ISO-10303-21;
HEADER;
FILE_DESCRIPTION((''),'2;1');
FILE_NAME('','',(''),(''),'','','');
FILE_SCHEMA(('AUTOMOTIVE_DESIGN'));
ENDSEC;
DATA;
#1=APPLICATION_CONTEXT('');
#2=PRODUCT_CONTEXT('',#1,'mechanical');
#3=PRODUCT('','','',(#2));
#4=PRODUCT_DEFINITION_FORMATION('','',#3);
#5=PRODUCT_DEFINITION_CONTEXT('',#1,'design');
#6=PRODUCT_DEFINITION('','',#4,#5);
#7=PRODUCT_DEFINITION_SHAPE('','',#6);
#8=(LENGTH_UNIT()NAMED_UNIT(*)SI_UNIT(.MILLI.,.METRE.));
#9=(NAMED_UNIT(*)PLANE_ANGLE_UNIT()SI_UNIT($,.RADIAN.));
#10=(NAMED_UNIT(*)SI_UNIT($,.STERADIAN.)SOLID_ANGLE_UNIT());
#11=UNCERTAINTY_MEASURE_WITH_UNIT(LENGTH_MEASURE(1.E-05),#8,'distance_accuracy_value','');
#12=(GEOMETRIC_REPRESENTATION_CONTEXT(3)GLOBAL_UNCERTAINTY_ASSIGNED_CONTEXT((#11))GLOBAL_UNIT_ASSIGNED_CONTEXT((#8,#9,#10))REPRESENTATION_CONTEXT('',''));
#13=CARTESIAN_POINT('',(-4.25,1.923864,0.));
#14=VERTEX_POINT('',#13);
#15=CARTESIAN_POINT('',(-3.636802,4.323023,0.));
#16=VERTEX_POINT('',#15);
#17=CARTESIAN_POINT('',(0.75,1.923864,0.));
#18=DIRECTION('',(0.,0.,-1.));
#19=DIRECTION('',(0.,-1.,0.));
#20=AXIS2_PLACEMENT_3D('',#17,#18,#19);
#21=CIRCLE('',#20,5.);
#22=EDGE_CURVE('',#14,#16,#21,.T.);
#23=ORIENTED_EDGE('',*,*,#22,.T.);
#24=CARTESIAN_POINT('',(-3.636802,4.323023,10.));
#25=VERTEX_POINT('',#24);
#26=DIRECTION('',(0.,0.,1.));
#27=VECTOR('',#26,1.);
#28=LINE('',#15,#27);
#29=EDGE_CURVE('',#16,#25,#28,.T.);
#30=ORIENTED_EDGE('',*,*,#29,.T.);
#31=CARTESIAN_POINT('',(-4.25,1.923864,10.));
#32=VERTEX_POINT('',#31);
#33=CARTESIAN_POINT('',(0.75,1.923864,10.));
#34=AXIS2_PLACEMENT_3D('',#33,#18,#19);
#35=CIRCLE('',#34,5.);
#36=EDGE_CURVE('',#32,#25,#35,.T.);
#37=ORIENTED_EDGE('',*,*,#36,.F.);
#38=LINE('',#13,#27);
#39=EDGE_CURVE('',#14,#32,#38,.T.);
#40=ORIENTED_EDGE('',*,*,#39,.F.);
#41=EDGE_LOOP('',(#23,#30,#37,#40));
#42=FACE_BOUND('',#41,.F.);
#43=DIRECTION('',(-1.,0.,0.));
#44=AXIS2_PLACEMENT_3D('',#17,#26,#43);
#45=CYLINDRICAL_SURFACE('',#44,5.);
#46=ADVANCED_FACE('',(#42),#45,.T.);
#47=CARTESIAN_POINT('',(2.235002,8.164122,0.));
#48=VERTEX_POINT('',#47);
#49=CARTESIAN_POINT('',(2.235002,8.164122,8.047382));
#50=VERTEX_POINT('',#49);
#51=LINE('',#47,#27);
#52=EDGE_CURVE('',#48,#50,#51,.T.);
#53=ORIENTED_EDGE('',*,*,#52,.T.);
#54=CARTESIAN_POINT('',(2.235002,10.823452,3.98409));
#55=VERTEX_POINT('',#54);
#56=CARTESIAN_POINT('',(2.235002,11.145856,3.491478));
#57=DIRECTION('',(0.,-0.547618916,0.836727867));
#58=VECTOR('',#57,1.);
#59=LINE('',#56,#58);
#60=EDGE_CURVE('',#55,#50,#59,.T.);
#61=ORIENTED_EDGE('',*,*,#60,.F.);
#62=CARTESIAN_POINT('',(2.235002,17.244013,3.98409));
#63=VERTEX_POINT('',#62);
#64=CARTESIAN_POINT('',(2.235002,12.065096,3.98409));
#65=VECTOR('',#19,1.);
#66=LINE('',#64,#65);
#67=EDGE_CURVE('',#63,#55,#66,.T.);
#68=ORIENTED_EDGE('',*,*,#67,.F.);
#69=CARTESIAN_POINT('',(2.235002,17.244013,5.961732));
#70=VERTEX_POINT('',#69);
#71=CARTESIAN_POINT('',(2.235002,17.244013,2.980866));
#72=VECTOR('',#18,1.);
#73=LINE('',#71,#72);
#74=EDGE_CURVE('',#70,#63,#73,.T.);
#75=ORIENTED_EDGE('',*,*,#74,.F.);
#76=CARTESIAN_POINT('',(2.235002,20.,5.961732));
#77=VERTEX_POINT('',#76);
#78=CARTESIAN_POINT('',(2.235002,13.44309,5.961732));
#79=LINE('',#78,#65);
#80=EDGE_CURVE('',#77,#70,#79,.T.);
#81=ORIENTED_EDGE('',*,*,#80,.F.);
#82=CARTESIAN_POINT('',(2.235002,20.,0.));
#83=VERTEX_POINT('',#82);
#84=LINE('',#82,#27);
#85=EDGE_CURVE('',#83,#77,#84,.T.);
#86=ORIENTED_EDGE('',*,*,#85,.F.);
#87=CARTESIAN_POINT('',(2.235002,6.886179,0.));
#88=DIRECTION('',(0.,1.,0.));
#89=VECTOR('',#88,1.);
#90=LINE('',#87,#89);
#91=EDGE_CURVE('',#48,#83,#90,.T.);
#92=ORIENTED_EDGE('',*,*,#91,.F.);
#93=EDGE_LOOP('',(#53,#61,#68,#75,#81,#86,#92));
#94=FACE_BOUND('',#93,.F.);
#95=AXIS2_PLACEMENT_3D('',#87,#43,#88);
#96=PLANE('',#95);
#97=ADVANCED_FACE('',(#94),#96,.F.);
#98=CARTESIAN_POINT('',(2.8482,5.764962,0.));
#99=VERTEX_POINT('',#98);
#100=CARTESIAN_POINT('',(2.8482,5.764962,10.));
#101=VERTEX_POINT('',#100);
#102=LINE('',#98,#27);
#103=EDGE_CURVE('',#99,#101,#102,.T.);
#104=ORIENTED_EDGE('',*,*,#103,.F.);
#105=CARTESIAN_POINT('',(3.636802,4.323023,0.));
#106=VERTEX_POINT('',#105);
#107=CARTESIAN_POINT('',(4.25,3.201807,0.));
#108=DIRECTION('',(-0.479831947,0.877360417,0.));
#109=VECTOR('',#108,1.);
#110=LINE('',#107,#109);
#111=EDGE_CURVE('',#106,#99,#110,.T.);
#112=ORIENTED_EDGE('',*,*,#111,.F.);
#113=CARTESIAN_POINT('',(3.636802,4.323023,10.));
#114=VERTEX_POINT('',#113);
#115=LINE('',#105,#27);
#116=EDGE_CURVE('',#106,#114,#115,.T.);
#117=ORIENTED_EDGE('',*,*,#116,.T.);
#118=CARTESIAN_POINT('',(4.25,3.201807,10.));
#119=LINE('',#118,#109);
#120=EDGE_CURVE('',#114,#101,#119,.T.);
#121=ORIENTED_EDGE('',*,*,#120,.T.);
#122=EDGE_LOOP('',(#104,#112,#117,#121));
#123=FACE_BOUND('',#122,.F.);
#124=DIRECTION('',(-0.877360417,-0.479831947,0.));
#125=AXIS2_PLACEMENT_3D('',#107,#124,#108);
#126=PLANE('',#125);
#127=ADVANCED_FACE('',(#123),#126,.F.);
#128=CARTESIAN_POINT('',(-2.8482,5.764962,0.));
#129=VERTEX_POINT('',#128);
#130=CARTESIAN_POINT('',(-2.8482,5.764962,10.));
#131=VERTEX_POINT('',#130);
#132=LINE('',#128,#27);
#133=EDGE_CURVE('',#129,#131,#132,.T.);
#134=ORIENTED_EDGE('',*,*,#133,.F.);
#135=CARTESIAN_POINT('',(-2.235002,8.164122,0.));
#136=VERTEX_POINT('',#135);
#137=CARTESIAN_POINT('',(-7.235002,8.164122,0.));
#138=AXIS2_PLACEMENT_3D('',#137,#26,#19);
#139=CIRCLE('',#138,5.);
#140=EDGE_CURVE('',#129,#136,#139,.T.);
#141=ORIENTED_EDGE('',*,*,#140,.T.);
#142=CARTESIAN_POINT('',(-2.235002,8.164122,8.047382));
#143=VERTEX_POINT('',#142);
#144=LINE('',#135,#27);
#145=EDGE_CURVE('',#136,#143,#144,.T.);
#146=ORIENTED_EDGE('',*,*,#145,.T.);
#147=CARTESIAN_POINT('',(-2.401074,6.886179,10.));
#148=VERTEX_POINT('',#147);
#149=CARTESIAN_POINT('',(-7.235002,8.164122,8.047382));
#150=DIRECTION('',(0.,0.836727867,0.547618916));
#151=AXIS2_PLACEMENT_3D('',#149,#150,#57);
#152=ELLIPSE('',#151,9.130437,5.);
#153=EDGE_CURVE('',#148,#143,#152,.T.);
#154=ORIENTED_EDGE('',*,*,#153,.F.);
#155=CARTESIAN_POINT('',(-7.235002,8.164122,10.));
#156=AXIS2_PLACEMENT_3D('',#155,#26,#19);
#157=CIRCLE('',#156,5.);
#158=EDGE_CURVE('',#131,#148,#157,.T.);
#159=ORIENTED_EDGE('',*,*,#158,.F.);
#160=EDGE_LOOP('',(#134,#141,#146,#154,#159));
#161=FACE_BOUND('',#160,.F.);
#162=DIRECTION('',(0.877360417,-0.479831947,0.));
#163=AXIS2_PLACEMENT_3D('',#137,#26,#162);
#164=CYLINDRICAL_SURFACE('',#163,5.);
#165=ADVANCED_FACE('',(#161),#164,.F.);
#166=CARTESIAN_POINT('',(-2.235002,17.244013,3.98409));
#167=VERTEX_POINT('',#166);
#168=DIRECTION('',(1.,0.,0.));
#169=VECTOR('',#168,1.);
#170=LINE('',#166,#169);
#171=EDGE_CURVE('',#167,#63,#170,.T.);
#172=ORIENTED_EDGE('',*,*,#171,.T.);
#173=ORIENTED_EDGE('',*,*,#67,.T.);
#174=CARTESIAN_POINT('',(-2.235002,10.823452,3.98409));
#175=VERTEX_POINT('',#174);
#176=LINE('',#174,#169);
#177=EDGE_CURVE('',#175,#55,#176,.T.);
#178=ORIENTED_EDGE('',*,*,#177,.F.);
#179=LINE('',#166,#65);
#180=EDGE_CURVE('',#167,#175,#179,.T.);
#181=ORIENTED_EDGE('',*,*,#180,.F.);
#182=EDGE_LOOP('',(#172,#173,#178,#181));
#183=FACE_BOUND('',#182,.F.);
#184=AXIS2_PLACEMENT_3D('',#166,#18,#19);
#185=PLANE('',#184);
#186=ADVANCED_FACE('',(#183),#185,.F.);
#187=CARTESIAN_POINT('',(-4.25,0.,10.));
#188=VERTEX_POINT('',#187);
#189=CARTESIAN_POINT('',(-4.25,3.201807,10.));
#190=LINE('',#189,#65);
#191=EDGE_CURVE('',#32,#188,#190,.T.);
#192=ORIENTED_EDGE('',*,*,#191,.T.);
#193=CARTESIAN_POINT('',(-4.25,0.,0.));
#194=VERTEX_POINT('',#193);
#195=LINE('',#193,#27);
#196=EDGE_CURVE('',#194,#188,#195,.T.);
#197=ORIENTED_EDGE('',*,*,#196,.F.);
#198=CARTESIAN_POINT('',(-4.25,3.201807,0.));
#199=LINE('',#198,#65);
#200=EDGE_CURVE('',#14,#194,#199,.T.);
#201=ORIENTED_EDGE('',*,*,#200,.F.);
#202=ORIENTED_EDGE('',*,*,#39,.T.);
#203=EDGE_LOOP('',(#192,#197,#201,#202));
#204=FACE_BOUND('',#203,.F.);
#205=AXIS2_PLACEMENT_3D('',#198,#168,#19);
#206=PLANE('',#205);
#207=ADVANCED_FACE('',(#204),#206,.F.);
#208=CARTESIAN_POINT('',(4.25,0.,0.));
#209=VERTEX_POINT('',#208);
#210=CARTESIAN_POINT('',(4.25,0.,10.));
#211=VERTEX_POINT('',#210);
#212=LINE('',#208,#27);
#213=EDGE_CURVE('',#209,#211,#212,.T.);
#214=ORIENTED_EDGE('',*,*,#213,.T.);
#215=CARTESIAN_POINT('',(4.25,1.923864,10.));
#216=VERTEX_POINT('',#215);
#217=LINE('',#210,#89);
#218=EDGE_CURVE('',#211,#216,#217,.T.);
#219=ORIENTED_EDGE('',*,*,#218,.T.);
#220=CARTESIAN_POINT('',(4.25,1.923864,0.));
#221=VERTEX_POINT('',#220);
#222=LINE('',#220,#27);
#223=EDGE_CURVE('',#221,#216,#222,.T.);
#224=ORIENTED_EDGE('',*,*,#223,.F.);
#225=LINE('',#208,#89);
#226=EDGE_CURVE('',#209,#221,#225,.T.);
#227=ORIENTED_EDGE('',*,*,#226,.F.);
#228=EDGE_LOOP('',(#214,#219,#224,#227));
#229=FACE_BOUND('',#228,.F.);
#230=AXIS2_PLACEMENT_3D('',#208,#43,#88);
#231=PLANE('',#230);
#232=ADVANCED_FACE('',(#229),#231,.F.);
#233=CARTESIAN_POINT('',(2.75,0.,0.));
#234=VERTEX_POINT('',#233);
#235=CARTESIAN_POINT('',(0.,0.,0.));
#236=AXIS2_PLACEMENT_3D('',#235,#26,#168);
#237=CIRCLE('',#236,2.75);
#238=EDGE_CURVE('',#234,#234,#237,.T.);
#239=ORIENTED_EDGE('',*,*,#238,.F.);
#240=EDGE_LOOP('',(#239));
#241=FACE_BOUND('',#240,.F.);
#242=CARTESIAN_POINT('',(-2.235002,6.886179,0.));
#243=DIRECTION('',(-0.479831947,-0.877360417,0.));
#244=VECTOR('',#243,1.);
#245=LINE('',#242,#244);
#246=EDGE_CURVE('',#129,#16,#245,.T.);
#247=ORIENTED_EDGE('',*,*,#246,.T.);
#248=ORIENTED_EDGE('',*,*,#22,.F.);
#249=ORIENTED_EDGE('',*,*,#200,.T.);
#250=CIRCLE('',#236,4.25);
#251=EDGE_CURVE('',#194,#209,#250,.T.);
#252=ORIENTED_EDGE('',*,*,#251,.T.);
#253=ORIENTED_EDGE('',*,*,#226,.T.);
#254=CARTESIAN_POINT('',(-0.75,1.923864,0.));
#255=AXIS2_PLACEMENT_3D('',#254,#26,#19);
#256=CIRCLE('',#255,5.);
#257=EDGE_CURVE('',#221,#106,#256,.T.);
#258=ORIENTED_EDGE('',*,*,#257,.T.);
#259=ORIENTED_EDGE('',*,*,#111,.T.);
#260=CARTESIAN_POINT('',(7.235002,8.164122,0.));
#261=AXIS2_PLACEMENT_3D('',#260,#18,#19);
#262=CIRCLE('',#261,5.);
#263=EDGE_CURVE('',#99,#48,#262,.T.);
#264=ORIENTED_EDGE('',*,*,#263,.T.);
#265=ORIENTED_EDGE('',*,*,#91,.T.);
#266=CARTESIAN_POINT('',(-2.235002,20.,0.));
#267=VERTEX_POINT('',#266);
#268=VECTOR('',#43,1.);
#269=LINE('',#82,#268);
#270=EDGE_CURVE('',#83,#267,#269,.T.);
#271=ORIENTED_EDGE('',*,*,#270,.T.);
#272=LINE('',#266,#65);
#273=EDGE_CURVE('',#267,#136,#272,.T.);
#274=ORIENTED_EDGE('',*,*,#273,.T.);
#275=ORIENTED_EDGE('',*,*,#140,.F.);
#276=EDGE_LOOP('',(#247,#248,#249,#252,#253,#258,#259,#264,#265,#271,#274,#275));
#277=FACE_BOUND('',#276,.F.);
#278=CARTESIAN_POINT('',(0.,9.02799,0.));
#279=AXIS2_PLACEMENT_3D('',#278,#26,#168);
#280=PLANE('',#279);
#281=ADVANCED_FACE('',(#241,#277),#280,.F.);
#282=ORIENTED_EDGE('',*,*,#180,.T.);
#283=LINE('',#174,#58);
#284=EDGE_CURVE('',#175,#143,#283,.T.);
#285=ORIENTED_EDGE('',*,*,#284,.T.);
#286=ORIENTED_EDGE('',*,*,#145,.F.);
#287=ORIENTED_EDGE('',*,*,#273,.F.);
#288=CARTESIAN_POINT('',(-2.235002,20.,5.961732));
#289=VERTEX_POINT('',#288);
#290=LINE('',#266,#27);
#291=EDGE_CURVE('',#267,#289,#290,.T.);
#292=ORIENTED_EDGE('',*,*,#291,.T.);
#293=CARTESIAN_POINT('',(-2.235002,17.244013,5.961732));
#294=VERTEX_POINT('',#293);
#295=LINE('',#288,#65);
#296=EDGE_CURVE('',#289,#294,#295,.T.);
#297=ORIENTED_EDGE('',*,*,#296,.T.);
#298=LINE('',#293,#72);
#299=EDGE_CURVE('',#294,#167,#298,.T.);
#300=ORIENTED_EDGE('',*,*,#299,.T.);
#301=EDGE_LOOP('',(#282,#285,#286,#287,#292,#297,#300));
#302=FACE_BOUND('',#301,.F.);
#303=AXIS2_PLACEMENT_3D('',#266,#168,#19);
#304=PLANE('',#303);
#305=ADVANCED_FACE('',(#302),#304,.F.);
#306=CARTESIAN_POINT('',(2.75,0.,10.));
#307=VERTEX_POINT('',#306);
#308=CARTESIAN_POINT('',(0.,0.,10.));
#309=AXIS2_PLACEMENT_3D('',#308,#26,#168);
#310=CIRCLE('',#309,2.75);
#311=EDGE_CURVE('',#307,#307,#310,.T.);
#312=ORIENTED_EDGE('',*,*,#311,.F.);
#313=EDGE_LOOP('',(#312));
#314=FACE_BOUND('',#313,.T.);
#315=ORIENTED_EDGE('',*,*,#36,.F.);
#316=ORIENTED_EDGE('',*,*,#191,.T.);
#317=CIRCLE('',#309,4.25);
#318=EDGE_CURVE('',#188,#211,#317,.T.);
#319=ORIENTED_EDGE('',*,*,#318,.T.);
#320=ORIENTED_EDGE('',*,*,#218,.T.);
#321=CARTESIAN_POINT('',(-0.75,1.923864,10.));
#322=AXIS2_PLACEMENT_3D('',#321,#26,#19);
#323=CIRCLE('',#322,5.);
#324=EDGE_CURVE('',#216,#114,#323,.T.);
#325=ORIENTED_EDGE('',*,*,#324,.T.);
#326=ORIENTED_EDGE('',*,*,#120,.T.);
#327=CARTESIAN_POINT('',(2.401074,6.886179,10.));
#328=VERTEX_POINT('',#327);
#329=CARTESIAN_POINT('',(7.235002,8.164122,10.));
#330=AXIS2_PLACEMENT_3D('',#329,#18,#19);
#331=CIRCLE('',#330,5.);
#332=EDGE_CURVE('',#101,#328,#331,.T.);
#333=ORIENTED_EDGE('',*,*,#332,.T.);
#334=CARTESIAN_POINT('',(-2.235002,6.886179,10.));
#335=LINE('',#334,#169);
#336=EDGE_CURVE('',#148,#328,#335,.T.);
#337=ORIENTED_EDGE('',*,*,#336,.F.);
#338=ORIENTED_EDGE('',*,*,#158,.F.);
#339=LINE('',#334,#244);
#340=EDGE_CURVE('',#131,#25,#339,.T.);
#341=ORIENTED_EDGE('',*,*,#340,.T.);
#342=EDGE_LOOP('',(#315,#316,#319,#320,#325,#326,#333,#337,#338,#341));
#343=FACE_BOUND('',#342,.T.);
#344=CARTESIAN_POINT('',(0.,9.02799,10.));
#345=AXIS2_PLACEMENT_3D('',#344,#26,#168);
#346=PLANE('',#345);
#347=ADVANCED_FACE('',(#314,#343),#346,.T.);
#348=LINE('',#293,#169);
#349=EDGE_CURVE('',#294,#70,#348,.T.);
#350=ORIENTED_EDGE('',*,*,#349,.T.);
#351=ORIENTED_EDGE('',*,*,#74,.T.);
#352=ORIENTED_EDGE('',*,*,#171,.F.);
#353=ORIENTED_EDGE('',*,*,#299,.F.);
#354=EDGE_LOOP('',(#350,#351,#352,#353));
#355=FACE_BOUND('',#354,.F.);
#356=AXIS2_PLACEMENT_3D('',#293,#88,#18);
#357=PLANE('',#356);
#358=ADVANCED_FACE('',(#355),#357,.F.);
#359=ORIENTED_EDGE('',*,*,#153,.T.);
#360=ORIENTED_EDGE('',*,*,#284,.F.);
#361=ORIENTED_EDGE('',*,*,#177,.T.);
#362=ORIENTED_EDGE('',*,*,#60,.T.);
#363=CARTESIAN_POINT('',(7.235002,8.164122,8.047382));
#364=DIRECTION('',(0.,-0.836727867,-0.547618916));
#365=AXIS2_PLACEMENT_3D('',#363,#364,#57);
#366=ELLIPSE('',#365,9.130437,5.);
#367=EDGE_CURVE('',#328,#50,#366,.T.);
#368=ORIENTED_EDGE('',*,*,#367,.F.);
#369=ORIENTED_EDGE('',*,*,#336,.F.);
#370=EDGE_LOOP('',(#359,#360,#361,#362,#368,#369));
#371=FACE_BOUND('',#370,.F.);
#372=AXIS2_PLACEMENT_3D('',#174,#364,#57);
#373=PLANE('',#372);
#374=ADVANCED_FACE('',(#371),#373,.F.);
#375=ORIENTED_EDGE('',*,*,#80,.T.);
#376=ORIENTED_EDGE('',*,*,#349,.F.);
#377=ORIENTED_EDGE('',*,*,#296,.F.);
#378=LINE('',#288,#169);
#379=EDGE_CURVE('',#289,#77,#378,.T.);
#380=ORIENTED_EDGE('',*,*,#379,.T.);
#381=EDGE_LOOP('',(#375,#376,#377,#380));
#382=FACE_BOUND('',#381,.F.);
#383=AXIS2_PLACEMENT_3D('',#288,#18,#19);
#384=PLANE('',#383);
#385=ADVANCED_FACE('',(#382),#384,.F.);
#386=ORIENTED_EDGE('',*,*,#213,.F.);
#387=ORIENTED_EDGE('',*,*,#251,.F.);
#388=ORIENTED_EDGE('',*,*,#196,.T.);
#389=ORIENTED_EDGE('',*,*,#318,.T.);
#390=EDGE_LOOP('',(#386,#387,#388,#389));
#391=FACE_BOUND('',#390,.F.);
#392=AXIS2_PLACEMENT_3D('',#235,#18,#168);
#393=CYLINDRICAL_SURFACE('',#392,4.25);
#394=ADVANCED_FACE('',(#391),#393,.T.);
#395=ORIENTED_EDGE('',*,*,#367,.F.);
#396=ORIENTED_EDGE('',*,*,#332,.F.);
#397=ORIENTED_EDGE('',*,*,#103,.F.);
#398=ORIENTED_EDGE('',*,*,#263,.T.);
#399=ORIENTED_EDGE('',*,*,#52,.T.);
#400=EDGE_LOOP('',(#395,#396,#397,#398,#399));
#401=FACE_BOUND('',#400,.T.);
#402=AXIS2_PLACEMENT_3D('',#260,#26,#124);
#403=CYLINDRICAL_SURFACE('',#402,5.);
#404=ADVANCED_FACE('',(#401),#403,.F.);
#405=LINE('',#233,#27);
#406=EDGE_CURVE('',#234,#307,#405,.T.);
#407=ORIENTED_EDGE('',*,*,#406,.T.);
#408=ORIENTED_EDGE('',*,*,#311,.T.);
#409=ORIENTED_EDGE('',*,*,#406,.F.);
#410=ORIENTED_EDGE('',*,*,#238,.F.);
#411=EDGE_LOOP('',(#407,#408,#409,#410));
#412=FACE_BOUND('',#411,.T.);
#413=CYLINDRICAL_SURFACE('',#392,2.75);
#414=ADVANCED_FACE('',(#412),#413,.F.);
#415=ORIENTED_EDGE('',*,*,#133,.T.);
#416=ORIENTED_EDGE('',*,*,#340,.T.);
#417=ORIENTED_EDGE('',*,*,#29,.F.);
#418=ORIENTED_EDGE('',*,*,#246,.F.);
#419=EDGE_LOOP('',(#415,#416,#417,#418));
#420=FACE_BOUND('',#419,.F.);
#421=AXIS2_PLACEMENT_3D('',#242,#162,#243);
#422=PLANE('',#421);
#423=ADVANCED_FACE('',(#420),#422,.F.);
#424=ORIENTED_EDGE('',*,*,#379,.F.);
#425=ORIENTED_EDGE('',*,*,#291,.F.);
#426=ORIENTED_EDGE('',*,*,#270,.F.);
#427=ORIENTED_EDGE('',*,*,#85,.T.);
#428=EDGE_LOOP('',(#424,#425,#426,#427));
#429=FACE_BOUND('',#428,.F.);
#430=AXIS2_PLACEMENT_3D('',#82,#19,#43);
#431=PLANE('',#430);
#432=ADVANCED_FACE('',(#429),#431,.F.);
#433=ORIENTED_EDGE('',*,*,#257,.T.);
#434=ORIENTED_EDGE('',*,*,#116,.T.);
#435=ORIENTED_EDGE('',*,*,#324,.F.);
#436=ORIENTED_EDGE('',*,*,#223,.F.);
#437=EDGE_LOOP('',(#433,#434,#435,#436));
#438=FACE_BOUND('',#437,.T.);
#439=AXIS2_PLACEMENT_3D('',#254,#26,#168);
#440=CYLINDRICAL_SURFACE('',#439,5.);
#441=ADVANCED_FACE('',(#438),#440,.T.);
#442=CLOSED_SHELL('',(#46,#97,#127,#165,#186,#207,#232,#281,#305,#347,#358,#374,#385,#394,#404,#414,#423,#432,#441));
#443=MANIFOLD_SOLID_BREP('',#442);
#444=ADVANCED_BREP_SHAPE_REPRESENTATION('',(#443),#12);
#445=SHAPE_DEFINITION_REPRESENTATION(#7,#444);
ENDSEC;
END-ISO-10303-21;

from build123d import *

# Parameters (mm, degrees)
F0_R     = 2.75
F1_DEPTH = 10
F3_DEPTH = 10
F4_F1_R  = 5
F4_F2_R  = 5
F4_F3_R  = 5
F4_F4_R  = 5


with BuildPart() as f1:
    # F0 (on Top) → F1 (new body)
    with BuildSketch(Plane.XY):
        with BuildLine():
            ThreePointArc((-4.25, 0), (0, 4.25), (4.25, 0))
            Line((4.25, 0), (4.25, 3.201806685))
            Line((4.25, 3.201806685), (2.2350018844, 6.8861790933))
            Line((2.2350018844, 6.8861790933), (2.2350018844, 10.8956433833))
            Line((2.2350018844, 10.8956433833), (2.2350018844, 20))
            Line((2.2350018844, 20), (-2.2350018844, 20))
            Line((-2.2350018844, 20), (-2.2350018844, 10.8956433833))
            Line((-2.2350018844, 10.8956433833), (-2.2350018844, 6.8861790933))
            Line((-2.2350018844, 6.8861790933), (-4.25, 3.201806685))
            Line((-4.25, 3.201806685), (-4.25, 0))
        make_face()
        with BuildLine():
            ThreePointArc((-4.25, 0), (0, -4.25), (4.25, 0))
            ThreePointArc((4.25, 0), (0, 4.25), (-4.25, 0))
        make_face()
        Circle(F0_R, mode=Mode.SUBTRACT)
    extrude(amount=F1_DEPTH)

    # F2 (on face) → F3 (cut)
    with BuildSketch(Plane(origin=(-2.2350018844, 0, 0), x_dir=(0, -1, 0), z_dir=(-1, 0, 0))):
        Polygon((-10.8234519139, 3.9840904064), (-6.8861790933, 10), (-20, 10), (-20, 5.9617315419), (-17.2440130264, 5.9617315419), (-17.2440130264, 3.9840904064), align=None)
    extrude(amount=-F3_DEPTH, mode=Mode.SUBTRACT)

    # F4: fillet of radius 5 on 6 edges, made by hand

    # F4_f1
    f4_f1_edges = [f1.edges().sort_by_distance(p)[0] for p in [
        (-4.25, 3.201806685, 5),
    ]]
    fillet(f4_f1_edges, radius=F4_F1_R)

    # F4_f2
    f4_f2_edges = [f1.edges().sort_by_distance(p)[0] for p in [
        (-2.2350018844, 6.8861790933, 5),
    ]]
    fillet(f4_f2_edges, radius=F4_F2_R)

    # F4_f3
    f4_f3_edges = [f1.edges().sort_by_distance(p)[0] for p in [
        (4.25, 3.201806685, 5),
    ]]
    fillet(f4_f3_edges, radius=F4_F3_R)

    # F4_f4
    f4_f4_edges = [f1.edges().sort_by_distance(p)[0] for p in [
        (2.2350018844, 6.8861790933, 5),
    ]]
    fillet(f4_f4_edges, radius=F4_F4_R)


solid = f1.part
